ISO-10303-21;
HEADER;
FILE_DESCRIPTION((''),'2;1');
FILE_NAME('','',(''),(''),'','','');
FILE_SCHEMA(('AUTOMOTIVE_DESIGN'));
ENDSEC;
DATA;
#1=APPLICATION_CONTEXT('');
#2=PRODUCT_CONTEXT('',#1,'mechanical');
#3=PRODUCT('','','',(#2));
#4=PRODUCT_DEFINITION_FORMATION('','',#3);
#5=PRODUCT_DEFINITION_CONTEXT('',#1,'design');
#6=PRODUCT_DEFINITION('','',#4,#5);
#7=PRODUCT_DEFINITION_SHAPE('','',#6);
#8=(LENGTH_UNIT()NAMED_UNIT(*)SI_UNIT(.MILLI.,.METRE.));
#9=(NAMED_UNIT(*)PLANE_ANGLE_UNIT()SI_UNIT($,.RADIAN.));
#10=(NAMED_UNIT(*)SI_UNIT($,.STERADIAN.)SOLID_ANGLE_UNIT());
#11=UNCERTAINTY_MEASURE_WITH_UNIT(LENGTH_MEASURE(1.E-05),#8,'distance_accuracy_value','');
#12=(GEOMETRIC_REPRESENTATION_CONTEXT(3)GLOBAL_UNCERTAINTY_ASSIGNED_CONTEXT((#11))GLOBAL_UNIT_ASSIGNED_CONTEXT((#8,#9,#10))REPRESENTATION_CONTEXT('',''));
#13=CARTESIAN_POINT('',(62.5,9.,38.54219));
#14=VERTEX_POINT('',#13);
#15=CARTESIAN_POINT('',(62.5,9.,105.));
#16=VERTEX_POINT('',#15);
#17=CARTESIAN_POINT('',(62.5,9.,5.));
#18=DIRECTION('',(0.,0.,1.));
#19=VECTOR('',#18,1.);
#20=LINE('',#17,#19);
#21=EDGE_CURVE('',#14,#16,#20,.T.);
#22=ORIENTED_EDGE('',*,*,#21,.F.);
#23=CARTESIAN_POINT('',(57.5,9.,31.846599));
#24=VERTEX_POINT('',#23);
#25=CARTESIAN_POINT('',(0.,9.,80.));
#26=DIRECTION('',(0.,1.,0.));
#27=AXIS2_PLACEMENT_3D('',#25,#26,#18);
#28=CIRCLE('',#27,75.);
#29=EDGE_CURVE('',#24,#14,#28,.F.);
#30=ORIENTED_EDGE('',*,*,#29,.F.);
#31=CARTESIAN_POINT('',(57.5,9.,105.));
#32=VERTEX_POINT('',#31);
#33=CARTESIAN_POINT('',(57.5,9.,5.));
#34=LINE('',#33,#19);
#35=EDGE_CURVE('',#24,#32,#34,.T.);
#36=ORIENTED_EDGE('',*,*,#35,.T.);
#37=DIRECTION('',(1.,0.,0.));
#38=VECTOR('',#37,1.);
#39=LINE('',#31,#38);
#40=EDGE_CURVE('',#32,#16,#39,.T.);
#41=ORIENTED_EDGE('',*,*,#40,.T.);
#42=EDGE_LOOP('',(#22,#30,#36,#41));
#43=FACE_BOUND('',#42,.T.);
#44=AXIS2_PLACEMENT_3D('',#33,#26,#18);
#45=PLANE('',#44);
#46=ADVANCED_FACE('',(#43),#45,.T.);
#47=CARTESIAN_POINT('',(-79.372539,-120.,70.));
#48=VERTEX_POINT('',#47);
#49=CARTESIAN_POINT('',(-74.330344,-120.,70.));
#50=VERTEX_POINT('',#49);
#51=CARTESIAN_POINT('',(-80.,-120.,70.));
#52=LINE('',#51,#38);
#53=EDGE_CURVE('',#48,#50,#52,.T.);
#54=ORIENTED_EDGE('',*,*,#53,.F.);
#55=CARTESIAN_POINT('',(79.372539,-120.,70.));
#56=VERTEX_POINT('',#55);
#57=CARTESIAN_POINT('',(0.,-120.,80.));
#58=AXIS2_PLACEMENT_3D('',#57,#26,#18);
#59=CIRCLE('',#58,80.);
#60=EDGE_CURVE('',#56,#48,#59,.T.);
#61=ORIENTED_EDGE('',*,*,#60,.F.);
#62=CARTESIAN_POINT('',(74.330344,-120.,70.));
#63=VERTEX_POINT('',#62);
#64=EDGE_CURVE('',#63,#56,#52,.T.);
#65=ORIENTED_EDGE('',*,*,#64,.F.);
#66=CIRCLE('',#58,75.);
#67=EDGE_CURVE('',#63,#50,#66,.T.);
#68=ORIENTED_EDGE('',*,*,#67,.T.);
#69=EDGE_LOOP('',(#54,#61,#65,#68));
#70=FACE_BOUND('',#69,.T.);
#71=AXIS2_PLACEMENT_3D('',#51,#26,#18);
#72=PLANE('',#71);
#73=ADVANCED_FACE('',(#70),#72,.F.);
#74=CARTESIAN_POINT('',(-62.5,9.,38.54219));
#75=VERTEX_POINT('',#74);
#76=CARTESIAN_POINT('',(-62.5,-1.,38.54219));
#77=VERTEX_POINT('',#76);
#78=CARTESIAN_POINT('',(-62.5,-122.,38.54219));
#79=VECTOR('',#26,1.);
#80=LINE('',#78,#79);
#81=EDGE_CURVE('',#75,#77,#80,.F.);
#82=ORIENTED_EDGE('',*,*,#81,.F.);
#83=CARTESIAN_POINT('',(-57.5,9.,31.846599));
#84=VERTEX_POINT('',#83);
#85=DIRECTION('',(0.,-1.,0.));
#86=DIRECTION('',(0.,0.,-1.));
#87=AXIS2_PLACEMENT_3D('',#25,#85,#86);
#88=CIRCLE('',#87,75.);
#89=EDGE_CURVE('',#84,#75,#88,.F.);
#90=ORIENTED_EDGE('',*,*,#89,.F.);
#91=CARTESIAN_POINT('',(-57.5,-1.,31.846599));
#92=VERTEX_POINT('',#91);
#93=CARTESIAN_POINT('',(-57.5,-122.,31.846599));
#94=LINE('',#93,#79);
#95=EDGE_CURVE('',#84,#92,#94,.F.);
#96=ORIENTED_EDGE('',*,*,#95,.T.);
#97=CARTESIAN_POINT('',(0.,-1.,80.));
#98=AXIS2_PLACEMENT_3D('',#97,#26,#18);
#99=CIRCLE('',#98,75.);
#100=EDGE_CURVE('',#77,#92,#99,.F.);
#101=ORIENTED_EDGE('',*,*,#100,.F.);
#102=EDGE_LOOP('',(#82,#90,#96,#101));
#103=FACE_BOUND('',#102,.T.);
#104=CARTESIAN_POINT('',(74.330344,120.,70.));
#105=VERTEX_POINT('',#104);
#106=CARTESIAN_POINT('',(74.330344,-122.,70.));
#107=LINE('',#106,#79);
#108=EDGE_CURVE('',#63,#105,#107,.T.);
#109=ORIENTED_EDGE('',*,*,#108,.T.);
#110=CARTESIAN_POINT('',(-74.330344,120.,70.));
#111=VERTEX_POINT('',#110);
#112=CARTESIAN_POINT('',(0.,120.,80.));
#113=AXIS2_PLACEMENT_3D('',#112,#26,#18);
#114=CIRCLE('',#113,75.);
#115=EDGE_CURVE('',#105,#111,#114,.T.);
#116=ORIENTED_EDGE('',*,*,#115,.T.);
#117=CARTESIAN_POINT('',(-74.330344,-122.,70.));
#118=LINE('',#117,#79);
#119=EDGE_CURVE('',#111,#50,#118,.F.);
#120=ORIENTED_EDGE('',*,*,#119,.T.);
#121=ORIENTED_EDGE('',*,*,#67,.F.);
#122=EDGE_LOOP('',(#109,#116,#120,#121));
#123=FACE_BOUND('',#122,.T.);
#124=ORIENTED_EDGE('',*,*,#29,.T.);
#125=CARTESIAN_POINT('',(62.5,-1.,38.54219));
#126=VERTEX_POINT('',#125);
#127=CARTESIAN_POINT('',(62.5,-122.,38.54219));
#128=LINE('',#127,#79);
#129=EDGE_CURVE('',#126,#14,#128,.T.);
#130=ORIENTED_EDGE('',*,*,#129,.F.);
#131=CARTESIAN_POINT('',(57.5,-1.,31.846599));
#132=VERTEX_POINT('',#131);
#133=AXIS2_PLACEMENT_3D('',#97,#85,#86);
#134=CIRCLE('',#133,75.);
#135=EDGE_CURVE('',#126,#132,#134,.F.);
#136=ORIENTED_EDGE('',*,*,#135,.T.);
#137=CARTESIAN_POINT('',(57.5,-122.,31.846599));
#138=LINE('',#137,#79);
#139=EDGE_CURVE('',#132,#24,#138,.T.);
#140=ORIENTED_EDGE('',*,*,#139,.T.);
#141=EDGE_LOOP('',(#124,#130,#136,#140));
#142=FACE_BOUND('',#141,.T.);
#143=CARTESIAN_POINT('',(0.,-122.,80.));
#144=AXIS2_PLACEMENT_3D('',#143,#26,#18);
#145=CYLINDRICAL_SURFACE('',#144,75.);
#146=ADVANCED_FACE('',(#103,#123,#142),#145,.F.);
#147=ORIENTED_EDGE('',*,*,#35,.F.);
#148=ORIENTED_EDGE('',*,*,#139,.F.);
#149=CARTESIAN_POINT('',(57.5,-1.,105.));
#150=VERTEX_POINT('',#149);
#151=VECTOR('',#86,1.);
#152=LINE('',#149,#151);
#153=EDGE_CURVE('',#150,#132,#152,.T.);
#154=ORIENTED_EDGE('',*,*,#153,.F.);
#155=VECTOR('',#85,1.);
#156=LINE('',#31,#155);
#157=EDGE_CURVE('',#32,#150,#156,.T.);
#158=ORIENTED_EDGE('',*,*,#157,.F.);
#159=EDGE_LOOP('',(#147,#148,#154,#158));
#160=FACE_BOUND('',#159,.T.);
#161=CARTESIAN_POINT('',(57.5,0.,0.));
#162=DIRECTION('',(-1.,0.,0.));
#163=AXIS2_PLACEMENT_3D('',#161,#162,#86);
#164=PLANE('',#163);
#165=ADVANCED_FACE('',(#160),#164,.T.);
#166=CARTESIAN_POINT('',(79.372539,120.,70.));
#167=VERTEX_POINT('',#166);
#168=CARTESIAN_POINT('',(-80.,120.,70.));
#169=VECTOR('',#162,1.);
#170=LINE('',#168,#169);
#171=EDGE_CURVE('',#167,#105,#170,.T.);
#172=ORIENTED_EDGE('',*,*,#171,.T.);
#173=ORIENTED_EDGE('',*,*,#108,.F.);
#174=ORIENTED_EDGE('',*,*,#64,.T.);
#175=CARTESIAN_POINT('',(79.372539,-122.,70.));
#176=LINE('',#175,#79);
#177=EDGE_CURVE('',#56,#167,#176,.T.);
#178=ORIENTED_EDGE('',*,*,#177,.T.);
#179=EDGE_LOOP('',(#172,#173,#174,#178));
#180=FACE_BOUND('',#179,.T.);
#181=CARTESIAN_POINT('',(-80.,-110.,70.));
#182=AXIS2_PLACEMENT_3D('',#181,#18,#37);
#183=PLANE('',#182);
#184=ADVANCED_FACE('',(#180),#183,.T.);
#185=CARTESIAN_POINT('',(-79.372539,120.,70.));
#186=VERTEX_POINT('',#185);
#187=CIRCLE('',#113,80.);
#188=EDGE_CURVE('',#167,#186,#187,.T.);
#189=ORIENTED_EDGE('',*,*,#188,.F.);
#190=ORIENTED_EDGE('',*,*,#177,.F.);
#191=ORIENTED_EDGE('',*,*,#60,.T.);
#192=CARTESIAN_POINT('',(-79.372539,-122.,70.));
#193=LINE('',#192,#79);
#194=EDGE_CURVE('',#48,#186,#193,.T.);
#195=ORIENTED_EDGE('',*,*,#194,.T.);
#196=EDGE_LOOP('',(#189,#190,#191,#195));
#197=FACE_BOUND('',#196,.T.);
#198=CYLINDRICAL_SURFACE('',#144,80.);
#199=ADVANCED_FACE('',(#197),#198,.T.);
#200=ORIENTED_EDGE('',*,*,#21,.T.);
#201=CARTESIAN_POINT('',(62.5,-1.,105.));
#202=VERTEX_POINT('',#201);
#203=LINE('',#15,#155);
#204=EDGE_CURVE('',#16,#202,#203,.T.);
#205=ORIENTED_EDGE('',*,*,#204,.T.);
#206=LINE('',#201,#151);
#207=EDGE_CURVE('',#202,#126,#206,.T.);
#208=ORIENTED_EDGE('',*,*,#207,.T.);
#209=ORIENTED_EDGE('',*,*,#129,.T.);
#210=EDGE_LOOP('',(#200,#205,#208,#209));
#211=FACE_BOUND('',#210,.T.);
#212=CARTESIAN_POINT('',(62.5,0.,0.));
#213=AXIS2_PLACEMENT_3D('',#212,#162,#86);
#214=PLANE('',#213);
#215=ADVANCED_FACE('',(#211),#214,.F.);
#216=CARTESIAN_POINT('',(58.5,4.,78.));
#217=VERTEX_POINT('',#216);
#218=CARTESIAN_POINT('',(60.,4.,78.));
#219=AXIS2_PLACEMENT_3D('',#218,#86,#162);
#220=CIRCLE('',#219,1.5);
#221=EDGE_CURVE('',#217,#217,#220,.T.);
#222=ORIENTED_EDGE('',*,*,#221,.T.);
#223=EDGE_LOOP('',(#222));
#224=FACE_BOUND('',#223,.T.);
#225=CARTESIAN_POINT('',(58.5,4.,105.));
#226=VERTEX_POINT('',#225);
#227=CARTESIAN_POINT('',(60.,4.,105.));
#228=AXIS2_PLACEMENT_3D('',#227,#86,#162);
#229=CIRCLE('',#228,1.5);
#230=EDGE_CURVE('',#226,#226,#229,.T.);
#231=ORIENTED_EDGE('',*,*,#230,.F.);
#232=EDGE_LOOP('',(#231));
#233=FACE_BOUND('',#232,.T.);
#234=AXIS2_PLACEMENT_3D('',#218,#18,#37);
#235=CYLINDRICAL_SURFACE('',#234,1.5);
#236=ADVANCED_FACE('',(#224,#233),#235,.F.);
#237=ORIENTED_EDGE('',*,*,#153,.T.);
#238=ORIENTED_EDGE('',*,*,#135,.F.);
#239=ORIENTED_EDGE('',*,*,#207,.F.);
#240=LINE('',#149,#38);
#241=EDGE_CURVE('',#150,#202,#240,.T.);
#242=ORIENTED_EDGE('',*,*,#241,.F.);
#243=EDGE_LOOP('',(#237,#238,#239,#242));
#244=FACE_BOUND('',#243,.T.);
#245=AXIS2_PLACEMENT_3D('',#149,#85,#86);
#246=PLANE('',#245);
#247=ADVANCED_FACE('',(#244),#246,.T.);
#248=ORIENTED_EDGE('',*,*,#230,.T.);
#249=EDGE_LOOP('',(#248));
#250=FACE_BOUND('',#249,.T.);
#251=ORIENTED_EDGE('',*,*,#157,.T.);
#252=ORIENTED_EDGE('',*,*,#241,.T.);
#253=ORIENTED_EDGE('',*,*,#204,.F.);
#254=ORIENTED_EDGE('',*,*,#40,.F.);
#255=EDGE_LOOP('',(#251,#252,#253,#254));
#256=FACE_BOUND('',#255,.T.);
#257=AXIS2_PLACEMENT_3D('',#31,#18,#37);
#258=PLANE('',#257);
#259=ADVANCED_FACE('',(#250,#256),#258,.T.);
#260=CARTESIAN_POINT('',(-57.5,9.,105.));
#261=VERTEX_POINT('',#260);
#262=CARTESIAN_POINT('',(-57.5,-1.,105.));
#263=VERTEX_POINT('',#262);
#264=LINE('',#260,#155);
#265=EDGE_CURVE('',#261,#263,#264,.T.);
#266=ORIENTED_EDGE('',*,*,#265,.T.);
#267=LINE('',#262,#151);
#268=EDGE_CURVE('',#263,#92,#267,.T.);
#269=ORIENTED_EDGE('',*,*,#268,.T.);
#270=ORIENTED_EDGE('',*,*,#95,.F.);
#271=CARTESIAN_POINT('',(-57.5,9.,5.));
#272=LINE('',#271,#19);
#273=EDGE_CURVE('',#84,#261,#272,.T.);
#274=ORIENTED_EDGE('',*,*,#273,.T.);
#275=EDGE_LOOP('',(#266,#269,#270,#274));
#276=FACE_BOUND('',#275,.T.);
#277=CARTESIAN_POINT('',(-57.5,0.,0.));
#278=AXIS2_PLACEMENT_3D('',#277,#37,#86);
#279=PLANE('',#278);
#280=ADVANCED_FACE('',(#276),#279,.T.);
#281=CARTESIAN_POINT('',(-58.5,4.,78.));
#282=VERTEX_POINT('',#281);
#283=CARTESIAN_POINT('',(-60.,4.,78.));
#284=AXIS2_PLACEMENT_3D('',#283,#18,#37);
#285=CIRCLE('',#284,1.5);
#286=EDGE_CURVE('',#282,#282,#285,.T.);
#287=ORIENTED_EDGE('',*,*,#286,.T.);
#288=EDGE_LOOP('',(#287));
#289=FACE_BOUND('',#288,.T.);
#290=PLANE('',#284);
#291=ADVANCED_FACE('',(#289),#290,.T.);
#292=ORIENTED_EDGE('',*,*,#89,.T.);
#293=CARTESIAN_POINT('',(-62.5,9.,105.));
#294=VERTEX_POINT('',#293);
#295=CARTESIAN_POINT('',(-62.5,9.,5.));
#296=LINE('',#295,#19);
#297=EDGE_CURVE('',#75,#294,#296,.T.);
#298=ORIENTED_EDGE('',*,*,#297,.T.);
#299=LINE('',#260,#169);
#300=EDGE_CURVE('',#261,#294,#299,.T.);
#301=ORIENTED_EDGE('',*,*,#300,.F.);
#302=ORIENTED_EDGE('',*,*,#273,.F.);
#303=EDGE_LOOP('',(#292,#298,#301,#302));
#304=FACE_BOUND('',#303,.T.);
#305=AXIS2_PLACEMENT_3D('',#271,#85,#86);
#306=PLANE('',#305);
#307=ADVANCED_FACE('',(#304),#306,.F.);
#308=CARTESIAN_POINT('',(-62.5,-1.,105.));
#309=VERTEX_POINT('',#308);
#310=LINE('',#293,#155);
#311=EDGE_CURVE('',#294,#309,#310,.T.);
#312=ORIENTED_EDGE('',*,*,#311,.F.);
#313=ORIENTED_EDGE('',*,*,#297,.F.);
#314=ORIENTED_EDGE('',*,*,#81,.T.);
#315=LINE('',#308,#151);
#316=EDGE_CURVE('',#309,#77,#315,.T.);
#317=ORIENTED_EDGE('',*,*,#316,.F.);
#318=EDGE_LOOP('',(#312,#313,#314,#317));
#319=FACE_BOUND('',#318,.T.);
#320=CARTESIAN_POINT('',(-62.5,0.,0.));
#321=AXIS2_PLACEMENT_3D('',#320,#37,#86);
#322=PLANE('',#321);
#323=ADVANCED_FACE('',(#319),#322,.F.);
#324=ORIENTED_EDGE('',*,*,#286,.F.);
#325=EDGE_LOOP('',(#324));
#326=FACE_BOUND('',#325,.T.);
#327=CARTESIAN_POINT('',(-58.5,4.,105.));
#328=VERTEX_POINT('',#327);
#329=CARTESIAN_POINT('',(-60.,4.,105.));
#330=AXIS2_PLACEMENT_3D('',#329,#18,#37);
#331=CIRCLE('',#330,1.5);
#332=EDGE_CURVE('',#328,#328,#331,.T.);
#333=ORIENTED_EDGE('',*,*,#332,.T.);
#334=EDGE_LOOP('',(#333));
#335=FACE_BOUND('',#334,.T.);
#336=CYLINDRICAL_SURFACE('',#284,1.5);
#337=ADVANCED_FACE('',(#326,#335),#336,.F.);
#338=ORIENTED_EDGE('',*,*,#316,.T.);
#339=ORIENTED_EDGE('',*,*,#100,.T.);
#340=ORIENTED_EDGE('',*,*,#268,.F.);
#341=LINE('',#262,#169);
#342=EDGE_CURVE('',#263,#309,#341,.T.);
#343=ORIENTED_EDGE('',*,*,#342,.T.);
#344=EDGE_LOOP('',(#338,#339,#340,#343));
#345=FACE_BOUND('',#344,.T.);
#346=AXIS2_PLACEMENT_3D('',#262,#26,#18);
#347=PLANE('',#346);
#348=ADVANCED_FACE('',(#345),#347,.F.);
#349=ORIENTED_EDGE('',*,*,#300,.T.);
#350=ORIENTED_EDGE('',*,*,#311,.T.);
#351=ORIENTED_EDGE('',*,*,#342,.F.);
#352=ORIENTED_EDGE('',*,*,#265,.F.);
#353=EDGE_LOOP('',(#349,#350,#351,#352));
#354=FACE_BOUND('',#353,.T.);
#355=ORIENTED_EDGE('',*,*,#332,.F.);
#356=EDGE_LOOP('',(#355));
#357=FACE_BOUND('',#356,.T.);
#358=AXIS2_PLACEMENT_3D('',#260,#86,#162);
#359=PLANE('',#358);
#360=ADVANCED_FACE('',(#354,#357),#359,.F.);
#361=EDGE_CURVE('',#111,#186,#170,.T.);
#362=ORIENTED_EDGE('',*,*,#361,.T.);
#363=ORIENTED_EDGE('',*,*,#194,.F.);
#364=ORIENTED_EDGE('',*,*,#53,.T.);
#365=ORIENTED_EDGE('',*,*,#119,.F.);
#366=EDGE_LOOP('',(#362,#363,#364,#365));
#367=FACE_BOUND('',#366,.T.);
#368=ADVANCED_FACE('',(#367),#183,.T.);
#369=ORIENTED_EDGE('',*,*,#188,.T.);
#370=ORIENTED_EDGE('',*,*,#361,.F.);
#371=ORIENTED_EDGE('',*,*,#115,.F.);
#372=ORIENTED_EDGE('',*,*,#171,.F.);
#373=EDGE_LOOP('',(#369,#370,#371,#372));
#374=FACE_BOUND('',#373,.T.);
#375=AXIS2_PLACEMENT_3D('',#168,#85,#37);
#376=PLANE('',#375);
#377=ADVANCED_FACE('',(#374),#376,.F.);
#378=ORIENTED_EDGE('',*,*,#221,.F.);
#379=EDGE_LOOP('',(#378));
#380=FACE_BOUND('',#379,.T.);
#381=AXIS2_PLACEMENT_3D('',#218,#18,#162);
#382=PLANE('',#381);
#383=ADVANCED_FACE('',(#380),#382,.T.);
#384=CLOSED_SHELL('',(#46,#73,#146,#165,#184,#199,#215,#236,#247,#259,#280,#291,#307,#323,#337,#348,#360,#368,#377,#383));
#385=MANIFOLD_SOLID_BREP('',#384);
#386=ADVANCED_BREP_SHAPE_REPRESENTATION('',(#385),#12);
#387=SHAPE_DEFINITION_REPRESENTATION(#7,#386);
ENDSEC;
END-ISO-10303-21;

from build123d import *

# Parameters (mm, degrees)
Y_KSEKLIK_EKSTR_ZYON1_DEPTH = 70
KES_EKSTR_ZYON11_DEPTH      = 242
IZIM3_W                     = 100
IZIM3_H                     = 10
Y_KSEKLIK_EKSTR_ZYON4_DEPTH = 2.5
KES_EKSTR_ZYON12_REACH      = 177.214
KES_EKSTR_ZYON12_END_RADIUS = 80
IZIM13_W                    = 5
IZIM13_H                    = 10
IZIM14_R                    = 1.5
KES_EKSTR_ZYON13_DEPTH      = 27


with BuildPart() as part:
    # Çizim1 → Yükseklik-Ekstrüzyon1 (new body)
    with BuildSketch(Plane.XY):
        with BuildLine():
            Line((-80, 120), (80, 120))
            ThreePointArc((80, 120), (87.071067812, 117.071067812), (90, 110))
            Line((90, 110), (90, -110))
            ThreePointArc((90, -110), (87.071067812, -117.071067812), (80, -120))
            Line((80, -120), (-80, -120))
            ThreePointArc((-80, -120), (-87.071067812, -117.071067812), (-90, -110))
            Line((-90, -110), (-90, 110))
            ThreePointArc((-90, 110), (-87.071067812, 117.071067812), (-80, 120))
        make_face()
    extrude(amount=Y_KSEKLIK_EKSTR_ZYON1_DEPTH)

    # Çizim12 → Kes-Ekstrüzyon11 (cut)
    with BuildSketch(Plane(origin=(0, 120, 0), x_dir=(1, 0, 0), z_dir=(0, 1, 0))):
        with BuildLine():
            Line((90, -70), (90, 0))
            Line((90, 0), (2.06e-07, 0))
            ThreePointArc((2.06e-07, 0), (52.915026299, -20.000000068), (79.372539332, -70))
            Line((79.372539332, -70), (90, -70))
        make_face()
        with BuildLine():
            ThreePointArc((-79.372539332, -70), (-52.915026144, -19.999999932), (2.06e-07, 0))
            Line((2.06e-07, 0), (-90, 0))
            Line((-90, 0), (-90, -70))
            Line((-90, -70), (-79.372539332, -70))
        make_face()
        with BuildLine():
            Line((-74.330343737, -70), (74.330343737, -70))
            ThreePointArc((74.330343737, -70), (0, -5), (-74.330343737, -70))
        make_face()
    extrude(amount=-KES_EKSTR_ZYON11_DEPTH, mode=Mode.SUBTRACT)

    # Çizim3 → Yükseklik-Ekstrüzyon4 (add, symmetric)
    with BuildSketch(Plane(origin=(-60, 0, 0), x_dir=(0, 0, -1), z_dir=(1, 0, 0))):
        with Locations((-55, 4)):
            Rectangle(IZIM3_W, IZIM3_H)
    y_kseklik_ekstr_zyon4 = extrude(amount=Y_KSEKLIK_EKSTR_ZYON4_DEPTH, both=True)

    # Kes-Ekstrüzyon12: up to this cylinder (the profile starts outside it)
    kes_ekstr_zyon12_end = Plane(origin=(0, 4, 80), z_dir=(0, 1, 0)) * Cylinder(KES_EKSTR_ZYON12_END_RADIUS, 515.428, mode=Mode.PRIVATE)
    # Çizim13 → Kes-Ekstrüzyon12 (cut, up to the surface)
    with BuildSketch(Plane(origin=(0, 0, 5), x_dir=(-1, 0, 0), z_dir=(0, 0, -1)), mode=Mode.PRIVATE) as kes_ekstr_zyon12_sk1:
        with Locations((60, 4)):
            Rectangle(IZIM13_W, IZIM13_H)
    kes_ekstr_zyon12_tool1 = extrude(kes_ekstr_zyon12_sk1.sketch, amount=-KES_EKSTR_ZYON12_REACH, mode=Mode.PRIVATE) - kes_ekstr_zyon12_end
    kes_ekstr_zyon12 = kes_ekstr_zyon12_tool1.solids().sort_by_distance((-60, 4, 5))[0]
    add(kes_ekstr_zyon12, mode=Mode.SUBTRACT)

    # Çizim14 → Kes-Ekstrüzyon13 (cut)
    with BuildSketch(Plane.XY.offset(105)):
        with Locations((-60, 4)):
            Circle(IZIM14_R)
    kes_ekstr_zyon13 = extrude(amount=-KES_EKSTR_ZYON13_DEPTH, mode=Mode.SUBTRACT)

    # Aynalama4: Yükseklik-Ekstrüzyon4, Kes-Ekstrüzyon12, Kes-Ekstrüzyon13 across plane
    add(y_kseklik_ekstr_zyon4.mirror(Plane(origin=(0, 0, 0), x_dir=(0, 0, 1), z_dir=(1, 0, 0))))
    add(kes_ekstr_zyon12.mirror(Plane(origin=(0, 0, 0), x_dir=(0, 0, 1), z_dir=(1, 0, 0))), mode=Mode.SUBTRACT)
    add(kes_ekstr_zyon13.mirror(Plane(origin=(0, 0, 0), x_dir=(0, 0, 1), z_dir=(1, 0, 0))), mode=Mode.SUBTRACT)


solid = part.part
